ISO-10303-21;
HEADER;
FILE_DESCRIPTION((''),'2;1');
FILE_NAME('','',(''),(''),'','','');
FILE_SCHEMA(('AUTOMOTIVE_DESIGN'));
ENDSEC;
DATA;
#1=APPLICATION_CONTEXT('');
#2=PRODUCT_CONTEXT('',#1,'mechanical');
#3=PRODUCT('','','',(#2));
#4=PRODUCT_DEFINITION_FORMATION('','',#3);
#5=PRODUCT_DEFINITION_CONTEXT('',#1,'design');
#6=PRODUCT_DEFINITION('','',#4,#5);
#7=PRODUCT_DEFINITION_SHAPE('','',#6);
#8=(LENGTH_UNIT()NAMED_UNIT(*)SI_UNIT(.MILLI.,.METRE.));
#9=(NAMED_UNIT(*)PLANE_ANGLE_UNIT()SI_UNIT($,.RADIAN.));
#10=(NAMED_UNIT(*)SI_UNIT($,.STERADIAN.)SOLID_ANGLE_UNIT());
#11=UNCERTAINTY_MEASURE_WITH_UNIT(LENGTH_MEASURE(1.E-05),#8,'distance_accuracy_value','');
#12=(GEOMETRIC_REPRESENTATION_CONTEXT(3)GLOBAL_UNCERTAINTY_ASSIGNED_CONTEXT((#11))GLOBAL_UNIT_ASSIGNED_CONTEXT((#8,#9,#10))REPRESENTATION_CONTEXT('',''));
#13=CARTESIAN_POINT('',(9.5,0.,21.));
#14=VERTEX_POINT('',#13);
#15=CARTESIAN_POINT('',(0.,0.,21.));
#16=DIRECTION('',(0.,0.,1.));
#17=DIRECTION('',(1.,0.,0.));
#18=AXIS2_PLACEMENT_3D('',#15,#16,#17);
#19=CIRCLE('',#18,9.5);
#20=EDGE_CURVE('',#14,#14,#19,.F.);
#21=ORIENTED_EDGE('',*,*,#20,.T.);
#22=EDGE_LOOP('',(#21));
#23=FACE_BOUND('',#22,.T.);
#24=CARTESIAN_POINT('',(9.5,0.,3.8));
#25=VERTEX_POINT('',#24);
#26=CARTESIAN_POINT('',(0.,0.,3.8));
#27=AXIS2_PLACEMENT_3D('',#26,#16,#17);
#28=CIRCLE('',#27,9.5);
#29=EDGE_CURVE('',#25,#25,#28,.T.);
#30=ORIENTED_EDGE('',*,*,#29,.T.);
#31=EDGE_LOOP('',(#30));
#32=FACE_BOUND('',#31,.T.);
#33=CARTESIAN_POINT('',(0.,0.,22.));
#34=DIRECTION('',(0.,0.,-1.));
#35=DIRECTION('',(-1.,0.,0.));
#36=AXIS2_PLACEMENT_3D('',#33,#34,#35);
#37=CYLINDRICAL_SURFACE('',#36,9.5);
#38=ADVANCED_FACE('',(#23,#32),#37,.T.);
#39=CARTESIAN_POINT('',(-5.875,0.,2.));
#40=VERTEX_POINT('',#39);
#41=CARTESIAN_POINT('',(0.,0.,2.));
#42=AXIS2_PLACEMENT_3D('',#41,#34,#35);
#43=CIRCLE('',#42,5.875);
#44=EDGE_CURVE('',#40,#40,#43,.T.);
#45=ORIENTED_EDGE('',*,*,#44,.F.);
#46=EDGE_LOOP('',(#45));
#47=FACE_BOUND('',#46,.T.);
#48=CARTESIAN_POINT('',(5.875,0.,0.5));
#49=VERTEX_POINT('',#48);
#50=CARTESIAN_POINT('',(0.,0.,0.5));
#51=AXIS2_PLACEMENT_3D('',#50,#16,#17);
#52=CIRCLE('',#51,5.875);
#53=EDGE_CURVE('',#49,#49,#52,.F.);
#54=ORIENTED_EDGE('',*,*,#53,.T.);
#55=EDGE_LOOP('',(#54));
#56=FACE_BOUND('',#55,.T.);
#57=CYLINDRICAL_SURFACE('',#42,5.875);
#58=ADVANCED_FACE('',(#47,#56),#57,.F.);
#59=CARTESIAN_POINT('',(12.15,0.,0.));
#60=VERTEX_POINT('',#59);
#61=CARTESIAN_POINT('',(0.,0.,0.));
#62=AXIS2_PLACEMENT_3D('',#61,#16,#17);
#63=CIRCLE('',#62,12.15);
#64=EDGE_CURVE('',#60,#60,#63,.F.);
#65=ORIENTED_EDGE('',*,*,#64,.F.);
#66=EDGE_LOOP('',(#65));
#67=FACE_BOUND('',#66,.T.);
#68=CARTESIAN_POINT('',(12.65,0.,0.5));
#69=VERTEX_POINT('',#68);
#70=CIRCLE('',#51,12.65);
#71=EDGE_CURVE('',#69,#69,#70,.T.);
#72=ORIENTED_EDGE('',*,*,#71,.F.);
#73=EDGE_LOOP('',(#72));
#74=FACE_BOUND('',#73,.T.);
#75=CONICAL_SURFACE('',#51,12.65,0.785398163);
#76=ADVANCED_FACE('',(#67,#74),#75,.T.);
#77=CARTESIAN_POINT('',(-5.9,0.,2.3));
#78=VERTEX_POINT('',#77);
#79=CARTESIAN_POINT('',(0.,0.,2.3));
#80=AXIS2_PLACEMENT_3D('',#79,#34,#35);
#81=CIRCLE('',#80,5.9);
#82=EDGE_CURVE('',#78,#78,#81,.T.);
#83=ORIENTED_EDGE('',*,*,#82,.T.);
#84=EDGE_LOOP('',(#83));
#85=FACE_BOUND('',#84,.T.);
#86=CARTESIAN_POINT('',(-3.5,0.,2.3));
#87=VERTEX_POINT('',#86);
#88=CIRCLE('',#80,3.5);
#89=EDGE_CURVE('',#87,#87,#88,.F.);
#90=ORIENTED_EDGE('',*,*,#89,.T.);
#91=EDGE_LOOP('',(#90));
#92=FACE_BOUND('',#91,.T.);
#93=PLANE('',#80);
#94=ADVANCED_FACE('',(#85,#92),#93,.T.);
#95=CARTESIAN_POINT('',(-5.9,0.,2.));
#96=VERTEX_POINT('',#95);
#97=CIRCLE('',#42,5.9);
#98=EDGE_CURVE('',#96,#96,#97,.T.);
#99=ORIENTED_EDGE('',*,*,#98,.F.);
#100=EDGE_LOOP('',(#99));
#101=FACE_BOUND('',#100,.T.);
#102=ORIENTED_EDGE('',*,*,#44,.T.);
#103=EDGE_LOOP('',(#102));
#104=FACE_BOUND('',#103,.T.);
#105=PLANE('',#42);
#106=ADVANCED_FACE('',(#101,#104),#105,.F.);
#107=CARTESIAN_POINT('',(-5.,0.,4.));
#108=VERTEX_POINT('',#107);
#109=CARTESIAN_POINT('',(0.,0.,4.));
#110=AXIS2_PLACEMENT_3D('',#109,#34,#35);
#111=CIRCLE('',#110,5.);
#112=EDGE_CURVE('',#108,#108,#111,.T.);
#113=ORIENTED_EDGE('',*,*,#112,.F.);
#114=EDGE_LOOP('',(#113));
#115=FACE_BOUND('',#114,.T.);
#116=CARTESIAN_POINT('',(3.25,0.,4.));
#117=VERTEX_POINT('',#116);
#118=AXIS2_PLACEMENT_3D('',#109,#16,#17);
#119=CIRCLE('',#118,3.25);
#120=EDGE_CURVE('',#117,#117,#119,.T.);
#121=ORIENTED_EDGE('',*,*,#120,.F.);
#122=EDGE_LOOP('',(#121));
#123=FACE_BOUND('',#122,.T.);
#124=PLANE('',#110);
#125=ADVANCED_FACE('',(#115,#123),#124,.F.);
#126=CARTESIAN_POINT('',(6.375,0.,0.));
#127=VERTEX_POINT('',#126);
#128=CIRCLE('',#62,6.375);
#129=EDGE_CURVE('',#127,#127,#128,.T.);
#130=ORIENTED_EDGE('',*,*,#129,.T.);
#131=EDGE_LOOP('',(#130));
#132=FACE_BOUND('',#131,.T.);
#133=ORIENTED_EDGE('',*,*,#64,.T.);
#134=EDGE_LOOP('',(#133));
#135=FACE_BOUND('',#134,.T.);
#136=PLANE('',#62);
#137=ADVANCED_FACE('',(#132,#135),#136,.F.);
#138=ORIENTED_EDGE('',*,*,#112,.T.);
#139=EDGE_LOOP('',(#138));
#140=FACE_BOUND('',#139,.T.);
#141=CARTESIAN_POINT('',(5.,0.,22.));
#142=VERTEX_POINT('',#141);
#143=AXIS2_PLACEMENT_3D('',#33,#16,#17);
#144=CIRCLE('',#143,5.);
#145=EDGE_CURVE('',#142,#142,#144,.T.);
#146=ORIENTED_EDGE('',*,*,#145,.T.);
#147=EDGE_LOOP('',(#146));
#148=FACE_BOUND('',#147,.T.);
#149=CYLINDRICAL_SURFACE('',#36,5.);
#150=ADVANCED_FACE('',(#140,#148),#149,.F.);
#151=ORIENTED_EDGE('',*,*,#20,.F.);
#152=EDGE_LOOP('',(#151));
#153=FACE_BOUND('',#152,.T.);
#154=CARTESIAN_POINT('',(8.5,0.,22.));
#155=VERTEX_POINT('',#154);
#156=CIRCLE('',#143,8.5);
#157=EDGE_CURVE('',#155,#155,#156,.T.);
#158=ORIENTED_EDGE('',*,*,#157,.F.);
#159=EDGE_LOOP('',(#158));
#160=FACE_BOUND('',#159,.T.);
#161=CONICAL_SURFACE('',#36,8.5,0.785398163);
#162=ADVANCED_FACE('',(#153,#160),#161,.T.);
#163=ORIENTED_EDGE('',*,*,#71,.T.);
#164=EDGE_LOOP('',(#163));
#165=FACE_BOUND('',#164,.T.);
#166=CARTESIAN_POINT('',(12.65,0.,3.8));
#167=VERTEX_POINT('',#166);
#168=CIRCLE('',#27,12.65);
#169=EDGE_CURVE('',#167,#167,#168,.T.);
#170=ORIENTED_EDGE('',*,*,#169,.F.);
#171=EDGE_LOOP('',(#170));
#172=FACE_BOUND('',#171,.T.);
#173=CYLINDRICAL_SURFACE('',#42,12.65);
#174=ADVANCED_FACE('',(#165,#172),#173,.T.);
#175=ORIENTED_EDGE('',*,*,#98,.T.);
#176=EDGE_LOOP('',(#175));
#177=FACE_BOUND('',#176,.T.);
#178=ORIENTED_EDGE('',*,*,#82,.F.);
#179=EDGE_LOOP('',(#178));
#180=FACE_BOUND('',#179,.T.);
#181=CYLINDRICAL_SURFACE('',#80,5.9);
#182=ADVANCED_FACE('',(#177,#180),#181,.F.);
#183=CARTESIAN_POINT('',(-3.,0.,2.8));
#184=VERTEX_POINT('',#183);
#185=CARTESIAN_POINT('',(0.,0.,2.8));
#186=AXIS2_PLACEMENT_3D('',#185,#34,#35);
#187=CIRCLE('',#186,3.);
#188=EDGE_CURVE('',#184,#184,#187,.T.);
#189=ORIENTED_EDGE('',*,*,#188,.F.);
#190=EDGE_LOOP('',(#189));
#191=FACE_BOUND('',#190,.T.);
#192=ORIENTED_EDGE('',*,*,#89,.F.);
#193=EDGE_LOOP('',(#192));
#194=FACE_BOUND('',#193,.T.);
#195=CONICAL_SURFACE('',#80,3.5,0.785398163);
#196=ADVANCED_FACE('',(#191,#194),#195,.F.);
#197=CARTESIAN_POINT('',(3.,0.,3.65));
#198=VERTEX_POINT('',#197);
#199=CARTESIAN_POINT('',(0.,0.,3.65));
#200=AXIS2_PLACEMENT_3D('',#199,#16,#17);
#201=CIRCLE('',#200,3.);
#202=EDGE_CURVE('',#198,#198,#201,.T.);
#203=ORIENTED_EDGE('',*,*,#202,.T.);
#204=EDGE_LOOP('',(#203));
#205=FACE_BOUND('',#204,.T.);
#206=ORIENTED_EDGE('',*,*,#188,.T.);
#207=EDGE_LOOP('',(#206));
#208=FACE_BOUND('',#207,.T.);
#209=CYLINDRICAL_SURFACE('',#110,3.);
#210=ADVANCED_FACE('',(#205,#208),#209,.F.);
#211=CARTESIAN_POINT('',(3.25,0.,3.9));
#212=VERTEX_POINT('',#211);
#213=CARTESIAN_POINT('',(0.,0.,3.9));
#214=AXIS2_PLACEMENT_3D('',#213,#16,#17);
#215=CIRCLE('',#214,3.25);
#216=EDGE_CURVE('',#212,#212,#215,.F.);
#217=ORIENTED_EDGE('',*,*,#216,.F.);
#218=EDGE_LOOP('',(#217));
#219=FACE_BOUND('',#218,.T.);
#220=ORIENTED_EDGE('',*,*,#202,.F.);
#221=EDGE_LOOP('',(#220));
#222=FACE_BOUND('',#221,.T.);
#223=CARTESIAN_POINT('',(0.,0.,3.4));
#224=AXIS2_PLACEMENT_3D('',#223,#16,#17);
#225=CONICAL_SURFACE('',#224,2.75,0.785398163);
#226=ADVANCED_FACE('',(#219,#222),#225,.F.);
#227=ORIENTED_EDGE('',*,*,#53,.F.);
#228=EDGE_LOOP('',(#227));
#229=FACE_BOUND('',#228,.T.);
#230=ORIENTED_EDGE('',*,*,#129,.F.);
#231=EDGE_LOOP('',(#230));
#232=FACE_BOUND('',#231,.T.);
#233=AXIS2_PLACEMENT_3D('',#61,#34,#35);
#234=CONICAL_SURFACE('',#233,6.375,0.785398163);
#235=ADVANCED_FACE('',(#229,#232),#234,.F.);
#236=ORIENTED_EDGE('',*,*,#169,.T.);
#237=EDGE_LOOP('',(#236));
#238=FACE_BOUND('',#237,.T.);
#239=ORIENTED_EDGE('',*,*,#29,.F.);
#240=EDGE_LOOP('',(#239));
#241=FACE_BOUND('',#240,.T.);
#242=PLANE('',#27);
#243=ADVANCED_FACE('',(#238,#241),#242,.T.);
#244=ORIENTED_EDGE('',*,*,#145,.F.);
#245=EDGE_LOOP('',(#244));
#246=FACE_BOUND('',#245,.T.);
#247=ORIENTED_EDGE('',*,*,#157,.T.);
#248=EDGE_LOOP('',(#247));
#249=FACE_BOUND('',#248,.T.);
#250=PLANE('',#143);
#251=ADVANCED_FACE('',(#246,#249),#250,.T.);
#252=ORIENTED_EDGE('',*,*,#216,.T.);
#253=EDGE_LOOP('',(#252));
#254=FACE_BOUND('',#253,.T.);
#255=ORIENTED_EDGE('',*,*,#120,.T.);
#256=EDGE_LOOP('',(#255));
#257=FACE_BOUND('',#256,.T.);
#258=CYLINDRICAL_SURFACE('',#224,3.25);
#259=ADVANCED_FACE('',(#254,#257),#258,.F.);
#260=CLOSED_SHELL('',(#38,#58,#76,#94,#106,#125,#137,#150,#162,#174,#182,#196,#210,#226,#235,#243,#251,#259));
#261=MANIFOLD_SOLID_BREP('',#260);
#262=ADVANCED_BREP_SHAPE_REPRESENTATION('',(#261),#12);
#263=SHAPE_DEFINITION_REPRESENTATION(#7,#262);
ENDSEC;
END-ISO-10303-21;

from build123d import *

# Parameters (mm, degrees)
SKETCH_1_R          = 12.65
SKETCH_1_R_2        = 5.875
EXTRUDE_1_DEPTH     = 2
SKETCH_2_R          = 9.5
SKETCH_2_R_2        = 5
EXTRUDE_2_DEPTH     = 20
CHAMFER_1_SIZE      = 0.5
SKETCH_3_R          = 12.65
SKETCH_3_R_2        = 9.5
EXTRUDE_3_DEPTH     = 1.8
CHAMFER_2_SIZE      = 1
CHAMFER_4_SIZE      = 0.5
SKETCH_4_R          = 5
SKETCH_4_R_2        = 3
EXTRUDE_4_DEPTH     = 2
SKETCH_7_R          = 5.9
CUT_EXTRUDE_1_DEPTH = 0.3
CHAMFER_5_SIZE      = 0.5
SKETCH_8_R          = 3.25
CUT_EXTRUDE_2_DEPTH = 0.6
CHAMFER_6_SIZE      = 0.5


with BuildPart() as part:
    # 스케치1 → 보스-돌출1 (new body)
    with BuildSketch(Plane.XY):
        Circle(SKETCH_1_R)
        Circle(SKETCH_1_R_2, mode=Mode.SUBTRACT)
    extrude(amount=EXTRUDE_1_DEPTH)

    # 스케치2 → 보스-돌출2 (add)
    with BuildSketch(Plane.XY.offset(2)):
        Circle(SKETCH_2_R)
        Circle(SKETCH_2_R_2, mode=Mode.SUBTRACT)
    extrude(amount=EXTRUDE_2_DEPTH)

    # 모따기1
    chamfer_1_edges = [part.edges().sort_by_distance(p)[0] for p in [
        (-5.875, 0, 0),
    ]]
    chamfer(chamfer_1_edges, length=CHAMFER_1_SIZE)

    # 스케치3 → 보스-돌출3 (add)
    with BuildSketch(Plane.XY.offset(2)):
        Circle(SKETCH_3_R)
        Circle(SKETCH_3_R_2, mode=Mode.SUBTRACT)
    extrude(amount=EXTRUDE_3_DEPTH)

    # 모따기2
    chamfer_2_edges = [part.edges().sort_by_distance(p)[0] for p in [
        (-9.5, 0, 22),
    ]]
    chamfer(chamfer_2_edges, length=CHAMFER_2_SIZE)

    # 모따기4
    chamfer_4_edges = [part.edges().sort_by_distance(p)[0] for p in [
        (-12.65, 0, 0),
    ]]
    chamfer(chamfer_4_edges, length=CHAMFER_4_SIZE)

    # 스케치4 → 보스-돌출4 (add)
    with BuildSketch(Plane(origin=(0, 0, 2), x_dir=(-1, 0, 0), z_dir=(0, 0, -1))):
        Circle(SKETCH_4_R)
        Circle(SKETCH_4_R_2, mode=Mode.SUBTRACT)
    extrude(amount=-EXTRUDE_4_DEPTH)

    # 스케치7 → 컷-돌출1 (cut)
    with BuildSketch(Plane(origin=(0, 0, 2), x_dir=(-1, 0, 0), z_dir=(0, 0, -1))):
        Circle(SKETCH_7_R)
    extrude(amount=-CUT_EXTRUDE_1_DEPTH, mode=Mode.SUBTRACT)

    # 모따기5
    chamfer_5_edges = [part.edges().sort_by_distance(p)[0] for p in [
        (3, 0, 2.3),
    ]]
    chamfer(chamfer_5_edges, length=CHAMFER_5_SIZE)

    # 스케치8 → 컷-돌출2 (cut)
    with BuildSketch(Plane.XY.offset(4)):
        Circle(SKETCH_8_R)
    extrude(amount=-CUT_EXTRUDE_2_DEPTH, mode=Mode.SUBTRACT)

    # 모따기6
    # the kernel refuses this chamfer: 0.5 mm, written as the material it adds along each edge
    with BuildSketch(Plane(origin=(0, 0, 3.4), x_dir=(1, 0, 0), z_dir=(0, -1, 0))) as chamfer_6_piece_1_section:
        Polygon((3.25 - CHAMFER_6_SIZE, 0), (3.25, CHAMFER_6_SIZE), (3.25, 0), align=None)
    chamfer_6_piece_1 = revolve(axis=Axis((0, 0, 3.4), (0, 0, 1)), mode=Mode.PRIVATE)
    chamfer_6_piece_1 = chamfer_6_piece_1 - Plane(origin=(0, 0, 3.773130842), x_dir=(-1, 0, 0), z_dir=(0, 0, -1)) * Cylinder(3, 13, mode=Mode.PRIVATE)
    add(chamfer_6_piece_1)


solid = part.part
